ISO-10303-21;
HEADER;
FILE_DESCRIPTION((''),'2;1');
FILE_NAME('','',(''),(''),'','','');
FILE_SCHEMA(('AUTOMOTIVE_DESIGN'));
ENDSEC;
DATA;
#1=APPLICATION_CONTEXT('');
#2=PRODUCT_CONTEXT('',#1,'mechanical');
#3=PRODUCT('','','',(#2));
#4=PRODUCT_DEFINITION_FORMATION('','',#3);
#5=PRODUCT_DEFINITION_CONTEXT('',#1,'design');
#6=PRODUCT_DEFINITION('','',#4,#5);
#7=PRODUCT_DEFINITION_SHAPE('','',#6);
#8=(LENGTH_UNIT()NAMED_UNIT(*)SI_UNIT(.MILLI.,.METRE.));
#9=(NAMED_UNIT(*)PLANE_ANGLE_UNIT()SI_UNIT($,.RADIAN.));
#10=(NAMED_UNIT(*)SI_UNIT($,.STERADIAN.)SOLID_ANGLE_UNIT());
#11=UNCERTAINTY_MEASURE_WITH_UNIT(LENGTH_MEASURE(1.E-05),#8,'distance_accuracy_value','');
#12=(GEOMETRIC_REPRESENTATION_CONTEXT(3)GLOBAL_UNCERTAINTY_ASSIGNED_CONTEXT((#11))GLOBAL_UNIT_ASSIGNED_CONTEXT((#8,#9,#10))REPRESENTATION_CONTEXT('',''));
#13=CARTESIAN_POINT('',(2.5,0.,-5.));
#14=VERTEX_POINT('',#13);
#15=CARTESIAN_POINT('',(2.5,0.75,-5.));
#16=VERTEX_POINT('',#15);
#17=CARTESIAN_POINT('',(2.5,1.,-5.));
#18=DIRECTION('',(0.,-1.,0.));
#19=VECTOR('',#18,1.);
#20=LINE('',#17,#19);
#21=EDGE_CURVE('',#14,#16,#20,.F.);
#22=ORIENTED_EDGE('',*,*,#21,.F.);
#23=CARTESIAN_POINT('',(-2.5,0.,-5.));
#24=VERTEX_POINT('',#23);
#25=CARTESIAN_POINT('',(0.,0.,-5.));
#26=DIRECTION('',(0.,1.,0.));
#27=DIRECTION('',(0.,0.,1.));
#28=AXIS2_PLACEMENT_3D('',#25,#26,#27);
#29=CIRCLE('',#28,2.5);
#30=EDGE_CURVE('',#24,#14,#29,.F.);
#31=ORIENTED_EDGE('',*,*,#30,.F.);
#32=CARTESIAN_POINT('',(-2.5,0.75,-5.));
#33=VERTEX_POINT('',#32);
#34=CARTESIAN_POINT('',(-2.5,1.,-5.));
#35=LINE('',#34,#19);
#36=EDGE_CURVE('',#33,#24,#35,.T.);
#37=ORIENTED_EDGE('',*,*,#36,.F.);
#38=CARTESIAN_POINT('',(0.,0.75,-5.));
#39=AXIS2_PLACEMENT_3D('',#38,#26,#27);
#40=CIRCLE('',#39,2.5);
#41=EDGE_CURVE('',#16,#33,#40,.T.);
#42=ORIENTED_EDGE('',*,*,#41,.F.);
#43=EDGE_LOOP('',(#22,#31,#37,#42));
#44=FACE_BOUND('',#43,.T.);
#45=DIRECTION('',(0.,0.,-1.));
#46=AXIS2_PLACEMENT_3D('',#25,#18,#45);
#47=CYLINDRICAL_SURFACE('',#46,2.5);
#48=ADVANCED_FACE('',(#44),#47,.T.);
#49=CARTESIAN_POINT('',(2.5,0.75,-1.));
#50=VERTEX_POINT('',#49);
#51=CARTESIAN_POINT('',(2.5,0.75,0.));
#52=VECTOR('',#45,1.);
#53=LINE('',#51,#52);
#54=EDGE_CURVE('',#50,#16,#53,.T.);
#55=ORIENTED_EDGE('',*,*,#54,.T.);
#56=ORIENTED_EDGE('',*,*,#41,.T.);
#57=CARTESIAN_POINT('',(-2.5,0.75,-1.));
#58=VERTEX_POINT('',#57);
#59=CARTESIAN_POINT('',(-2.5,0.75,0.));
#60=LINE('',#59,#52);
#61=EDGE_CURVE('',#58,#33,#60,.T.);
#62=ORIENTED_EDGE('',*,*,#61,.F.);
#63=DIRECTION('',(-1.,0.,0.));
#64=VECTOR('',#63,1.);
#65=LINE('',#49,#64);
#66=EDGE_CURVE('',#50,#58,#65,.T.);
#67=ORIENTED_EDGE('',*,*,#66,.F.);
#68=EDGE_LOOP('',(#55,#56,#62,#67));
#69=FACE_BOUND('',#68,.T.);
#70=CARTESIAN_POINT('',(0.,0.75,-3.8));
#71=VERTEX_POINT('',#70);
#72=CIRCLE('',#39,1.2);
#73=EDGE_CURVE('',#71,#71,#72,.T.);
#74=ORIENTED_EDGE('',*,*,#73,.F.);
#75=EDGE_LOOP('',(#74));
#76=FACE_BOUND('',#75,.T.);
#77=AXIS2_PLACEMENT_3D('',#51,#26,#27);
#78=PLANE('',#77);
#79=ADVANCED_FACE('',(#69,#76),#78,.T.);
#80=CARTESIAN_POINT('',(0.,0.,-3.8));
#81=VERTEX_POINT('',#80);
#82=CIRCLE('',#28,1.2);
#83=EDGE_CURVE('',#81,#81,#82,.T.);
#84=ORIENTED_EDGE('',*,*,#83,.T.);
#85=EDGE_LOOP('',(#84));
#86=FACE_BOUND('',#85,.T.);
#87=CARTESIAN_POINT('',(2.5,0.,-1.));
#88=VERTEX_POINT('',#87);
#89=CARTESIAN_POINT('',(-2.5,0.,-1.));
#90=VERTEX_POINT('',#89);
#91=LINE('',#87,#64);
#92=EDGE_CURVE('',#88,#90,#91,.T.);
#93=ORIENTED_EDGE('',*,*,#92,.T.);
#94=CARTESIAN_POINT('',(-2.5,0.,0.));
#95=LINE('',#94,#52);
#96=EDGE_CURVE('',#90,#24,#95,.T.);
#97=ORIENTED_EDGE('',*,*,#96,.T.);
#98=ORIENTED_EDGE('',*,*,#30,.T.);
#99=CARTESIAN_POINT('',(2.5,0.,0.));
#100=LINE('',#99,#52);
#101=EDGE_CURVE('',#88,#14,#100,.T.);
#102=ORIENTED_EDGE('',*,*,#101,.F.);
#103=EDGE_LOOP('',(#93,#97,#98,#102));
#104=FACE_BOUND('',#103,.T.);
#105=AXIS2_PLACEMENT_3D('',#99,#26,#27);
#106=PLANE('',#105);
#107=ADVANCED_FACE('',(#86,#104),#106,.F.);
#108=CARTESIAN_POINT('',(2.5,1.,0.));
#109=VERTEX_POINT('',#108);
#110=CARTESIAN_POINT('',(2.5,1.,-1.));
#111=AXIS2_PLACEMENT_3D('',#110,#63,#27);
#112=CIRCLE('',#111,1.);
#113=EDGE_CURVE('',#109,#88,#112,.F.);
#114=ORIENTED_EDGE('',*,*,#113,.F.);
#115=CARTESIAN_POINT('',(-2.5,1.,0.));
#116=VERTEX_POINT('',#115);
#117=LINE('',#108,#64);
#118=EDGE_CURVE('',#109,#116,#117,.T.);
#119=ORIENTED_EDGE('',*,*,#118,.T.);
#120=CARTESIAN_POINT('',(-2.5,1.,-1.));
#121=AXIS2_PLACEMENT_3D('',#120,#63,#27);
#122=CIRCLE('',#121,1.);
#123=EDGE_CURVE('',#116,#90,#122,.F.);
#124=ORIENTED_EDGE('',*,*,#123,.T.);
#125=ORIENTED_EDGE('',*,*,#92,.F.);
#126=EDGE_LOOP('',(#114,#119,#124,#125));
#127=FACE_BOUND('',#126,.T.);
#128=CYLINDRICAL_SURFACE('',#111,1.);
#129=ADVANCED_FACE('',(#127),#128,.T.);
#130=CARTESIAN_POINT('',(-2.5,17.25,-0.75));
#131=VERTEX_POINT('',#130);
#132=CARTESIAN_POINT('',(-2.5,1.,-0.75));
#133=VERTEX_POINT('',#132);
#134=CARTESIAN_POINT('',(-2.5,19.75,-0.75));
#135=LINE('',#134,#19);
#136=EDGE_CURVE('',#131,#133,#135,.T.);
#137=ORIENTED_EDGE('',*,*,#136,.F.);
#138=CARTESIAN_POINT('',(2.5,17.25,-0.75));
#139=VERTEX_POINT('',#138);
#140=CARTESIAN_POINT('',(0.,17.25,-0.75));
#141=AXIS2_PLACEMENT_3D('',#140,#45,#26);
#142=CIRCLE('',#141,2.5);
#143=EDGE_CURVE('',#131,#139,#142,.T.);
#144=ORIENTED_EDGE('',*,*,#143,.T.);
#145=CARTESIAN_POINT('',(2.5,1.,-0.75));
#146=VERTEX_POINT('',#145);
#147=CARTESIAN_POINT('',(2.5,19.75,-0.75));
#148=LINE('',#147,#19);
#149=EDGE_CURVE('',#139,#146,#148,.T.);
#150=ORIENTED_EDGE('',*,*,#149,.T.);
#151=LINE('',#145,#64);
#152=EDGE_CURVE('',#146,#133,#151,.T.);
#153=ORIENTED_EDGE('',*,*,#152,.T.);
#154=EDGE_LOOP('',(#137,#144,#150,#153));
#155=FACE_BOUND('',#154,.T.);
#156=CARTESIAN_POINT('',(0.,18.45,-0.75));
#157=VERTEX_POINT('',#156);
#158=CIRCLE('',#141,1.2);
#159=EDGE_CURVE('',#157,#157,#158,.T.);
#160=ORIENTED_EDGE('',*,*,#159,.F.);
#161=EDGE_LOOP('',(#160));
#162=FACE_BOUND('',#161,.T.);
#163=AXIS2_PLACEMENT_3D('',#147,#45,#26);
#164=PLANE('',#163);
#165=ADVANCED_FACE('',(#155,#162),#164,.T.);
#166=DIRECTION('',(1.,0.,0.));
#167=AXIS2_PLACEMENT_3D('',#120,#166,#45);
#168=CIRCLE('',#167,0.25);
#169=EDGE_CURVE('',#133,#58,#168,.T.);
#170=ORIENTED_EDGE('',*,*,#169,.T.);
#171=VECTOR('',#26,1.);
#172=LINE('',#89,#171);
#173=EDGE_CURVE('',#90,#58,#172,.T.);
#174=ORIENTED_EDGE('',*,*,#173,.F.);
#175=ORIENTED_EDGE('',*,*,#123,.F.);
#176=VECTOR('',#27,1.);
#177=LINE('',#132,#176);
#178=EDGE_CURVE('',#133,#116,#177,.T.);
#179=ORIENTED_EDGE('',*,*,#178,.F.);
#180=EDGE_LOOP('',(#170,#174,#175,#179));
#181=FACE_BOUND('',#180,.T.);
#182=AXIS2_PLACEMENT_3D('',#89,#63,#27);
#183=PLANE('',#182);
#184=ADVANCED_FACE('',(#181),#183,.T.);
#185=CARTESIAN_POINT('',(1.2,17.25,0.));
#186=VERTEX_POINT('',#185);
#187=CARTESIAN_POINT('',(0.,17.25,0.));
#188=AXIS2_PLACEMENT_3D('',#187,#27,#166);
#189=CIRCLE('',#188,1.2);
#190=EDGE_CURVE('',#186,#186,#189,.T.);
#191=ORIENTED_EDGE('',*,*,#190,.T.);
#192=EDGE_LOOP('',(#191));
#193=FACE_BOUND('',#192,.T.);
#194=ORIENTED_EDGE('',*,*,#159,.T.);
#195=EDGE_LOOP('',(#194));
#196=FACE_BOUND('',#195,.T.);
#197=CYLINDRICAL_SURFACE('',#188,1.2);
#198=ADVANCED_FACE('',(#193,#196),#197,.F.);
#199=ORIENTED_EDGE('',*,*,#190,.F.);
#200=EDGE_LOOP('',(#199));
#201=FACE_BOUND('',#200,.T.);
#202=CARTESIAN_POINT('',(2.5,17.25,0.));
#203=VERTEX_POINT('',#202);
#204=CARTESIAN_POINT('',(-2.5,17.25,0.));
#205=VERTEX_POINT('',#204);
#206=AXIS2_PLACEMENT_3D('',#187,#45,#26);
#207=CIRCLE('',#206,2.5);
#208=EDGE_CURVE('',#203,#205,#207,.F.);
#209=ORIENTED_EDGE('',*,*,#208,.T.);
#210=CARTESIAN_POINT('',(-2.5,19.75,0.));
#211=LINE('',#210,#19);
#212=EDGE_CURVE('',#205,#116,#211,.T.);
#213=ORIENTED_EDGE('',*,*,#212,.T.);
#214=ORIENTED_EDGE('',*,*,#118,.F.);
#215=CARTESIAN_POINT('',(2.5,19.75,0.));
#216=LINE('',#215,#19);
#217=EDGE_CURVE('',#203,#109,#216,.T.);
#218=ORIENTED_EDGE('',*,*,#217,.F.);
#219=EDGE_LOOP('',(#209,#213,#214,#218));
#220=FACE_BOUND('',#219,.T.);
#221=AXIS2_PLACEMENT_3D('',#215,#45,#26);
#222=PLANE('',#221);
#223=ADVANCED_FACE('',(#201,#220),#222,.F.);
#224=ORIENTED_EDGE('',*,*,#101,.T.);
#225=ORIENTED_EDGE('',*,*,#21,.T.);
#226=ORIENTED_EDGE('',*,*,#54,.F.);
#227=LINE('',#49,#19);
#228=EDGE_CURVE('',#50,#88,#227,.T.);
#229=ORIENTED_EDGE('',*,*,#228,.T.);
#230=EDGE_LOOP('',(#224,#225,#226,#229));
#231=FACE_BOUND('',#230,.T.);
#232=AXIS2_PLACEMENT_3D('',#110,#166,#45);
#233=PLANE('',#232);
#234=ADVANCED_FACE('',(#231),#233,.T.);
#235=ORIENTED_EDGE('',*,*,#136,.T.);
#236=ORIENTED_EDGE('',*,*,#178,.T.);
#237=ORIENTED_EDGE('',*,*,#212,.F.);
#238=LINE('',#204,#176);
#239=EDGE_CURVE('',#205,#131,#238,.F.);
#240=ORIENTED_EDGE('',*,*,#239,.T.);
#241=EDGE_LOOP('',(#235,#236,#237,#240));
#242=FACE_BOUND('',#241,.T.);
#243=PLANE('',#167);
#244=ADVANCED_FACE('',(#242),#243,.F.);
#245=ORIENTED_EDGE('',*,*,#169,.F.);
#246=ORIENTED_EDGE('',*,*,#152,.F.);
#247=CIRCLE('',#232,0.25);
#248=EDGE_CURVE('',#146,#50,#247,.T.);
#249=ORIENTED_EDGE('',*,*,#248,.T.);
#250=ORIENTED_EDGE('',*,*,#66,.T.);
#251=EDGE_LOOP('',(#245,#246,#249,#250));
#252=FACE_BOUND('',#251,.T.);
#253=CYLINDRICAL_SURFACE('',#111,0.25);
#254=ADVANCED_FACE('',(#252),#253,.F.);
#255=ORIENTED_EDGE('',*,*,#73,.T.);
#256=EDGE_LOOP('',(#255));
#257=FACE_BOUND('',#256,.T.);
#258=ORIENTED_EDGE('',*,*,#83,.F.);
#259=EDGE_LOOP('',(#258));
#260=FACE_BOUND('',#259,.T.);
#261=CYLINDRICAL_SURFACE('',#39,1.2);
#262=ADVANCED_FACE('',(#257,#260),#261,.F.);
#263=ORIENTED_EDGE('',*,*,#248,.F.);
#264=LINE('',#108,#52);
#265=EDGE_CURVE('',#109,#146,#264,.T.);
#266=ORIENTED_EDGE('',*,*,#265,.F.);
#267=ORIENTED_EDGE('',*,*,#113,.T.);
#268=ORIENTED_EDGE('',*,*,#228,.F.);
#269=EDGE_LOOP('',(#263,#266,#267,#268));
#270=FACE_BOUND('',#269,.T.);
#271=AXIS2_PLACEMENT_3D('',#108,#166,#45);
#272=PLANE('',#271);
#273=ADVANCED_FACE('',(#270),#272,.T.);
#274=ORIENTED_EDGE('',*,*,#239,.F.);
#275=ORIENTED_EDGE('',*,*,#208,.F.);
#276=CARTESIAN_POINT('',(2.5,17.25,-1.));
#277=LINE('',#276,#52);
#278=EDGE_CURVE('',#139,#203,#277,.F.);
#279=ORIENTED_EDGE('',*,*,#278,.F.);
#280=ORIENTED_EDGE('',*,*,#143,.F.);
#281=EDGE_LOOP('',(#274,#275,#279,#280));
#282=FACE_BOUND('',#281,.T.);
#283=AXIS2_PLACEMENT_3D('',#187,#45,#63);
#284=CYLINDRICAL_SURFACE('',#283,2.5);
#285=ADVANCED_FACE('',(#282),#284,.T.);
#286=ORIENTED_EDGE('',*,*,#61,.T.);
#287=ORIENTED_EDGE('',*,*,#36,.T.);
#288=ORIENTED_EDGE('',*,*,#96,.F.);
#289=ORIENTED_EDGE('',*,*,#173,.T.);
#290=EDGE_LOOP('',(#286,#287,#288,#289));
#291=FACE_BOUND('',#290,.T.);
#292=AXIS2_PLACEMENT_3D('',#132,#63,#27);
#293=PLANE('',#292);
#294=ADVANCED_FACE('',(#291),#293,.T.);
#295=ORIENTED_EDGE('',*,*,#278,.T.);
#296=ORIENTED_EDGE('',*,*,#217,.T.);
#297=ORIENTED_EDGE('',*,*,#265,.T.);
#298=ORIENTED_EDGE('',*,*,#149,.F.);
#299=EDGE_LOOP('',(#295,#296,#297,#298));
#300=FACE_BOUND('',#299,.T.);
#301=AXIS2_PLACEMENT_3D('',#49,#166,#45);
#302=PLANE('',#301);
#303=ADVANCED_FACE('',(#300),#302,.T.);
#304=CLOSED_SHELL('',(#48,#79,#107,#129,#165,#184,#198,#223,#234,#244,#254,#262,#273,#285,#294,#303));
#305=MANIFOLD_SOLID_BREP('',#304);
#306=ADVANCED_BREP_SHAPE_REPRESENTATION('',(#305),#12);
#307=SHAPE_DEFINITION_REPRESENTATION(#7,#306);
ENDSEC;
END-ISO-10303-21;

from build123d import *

# Parameters (mm, degrees)
BASE_FLANGE1_DEPTH       = 2.5
FILLET1_RADIUS           = 2.5
FILLET1_LENGTH           = 0.75
FILLET2_RADIUS           = 2.5
FILLET2_LENGTH           = 0.75
M2_CLEARANCE_HOLE1_D     = 2.4
M2_CLEARANCE_HOLE1_DEPTH = 6
M2_CLEARANCE_HOLE1_TIP   = 0.721032743
M2_CLEARANCE_HOLE2_D     = 2.4
M2_CLEARANCE_HOLE2_DEPTH = 6
M2_CLEARANCE_HOLE2_TIP   = 0.721032743


# Sheet-metal steps are written as plain solids
with BuildPart() as part:
    # Sketch1 → Base-Flange1 (new, symmetric)
    with BuildSketch(Plane(origin=(0, 0, 0), x_dir=(0, 0, -1), z_dir=(1, 0, 0))):
        with BuildLine():
            Line((0, 19.75), (0, 1))
            ThreePointArc((0, 1), (0.292893219, 0.292893219), (1, 0))
            Line((1, 0), (7.5, 0))
            Line((7.5, 0), (7.5, 0.75))
            Line((7.5, 0.75), (1, 0.75))
            ThreePointArc((1, 0.75), (0.823223305, 0.823223305), (0.75, 1))
            Line((0.75, 1), (0.75, 19.75))
            Line((0.75, 19.75), (0, 19.75))
        make_face()
    extrude(amount=BASE_FLANGE1_DEPTH, both=True)

    # Fillet1: full round fillet: the end face becomes a half cylinder, R = half its width
    fillet1_face = Plane((0, 0.375, -7.5), x_dir=(0, -1, 0), z_dir=(0, 0, -1))  # on the end face: x along it, z out of the body
    fillet1_slab = fillet1_face.offset(-FILLET1_RADIUS / 2) * Box(FILLET1_LENGTH, 2 * FILLET1_RADIUS, FILLET1_RADIUS, mode=Mode.PRIVATE)  # the body's end, R deep
    fillet1_round = Plane((0, 0.375, -5), x_dir=(0, 0, -1), z_dir=(0, -1, 0)) * Cylinder(FILLET1_RADIUS, FILLET1_LENGTH, mode=Mode.PRIVATE)  # its axis R under the face
    add(fillet1_slab - fillet1_round, mode=Mode.SUBTRACT)

    # Fillet2: full round fillet: the end face becomes a half cylinder, R = half its width
    fillet2_face = Plane((0, 19.75, -0.375), x_dir=(0, 0, -1), z_dir=(0, 1, 0))  # on the end face: x along it, z out of the body
    fillet2_slab = fillet2_face.offset(-FILLET2_RADIUS / 2) * Box(FILLET2_LENGTH, 2 * FILLET2_RADIUS, FILLET2_RADIUS, mode=Mode.PRIVATE)  # the body's end, R deep
    fillet2_round = Plane((0, 17.25, -0.375), x_dir=(0, 1, 0), z_dir=(0, 0, -1)) * Cylinder(FILLET2_RADIUS, FILLET2_LENGTH, mode=Mode.PRIVATE)  # its axis R under the face
    add(fillet2_slab - fillet2_round, mode=Mode.SUBTRACT)

    # M2 Clearance Hole1
    with Locations(Plane.XY):
        with Locations((0, 17.25)):
            Hole(M2_CLEARANCE_HOLE1_D / 2, depth=M2_CLEARANCE_HOLE1_DEPTH)
            with Locations((0, 0, -(M2_CLEARANCE_HOLE1_DEPTH + M2_CLEARANCE_HOLE1_TIP / 2))):  # 118° drill point
                Cone(0, M2_CLEARANCE_HOLE1_D / 2, M2_CLEARANCE_HOLE1_TIP, mode=Mode.SUBTRACT)

    # M2 Clearance Hole2
    with Locations(Plane(origin=(0, 0.75, 0), x_dir=(1, 0, 0), z_dir=(0, 1, 0))):
        with Locations((0, 5)):
            Hole(M2_CLEARANCE_HOLE2_D / 2, depth=M2_CLEARANCE_HOLE2_DEPTH)
            with Locations((0, 0, -(M2_CLEARANCE_HOLE2_DEPTH + M2_CLEARANCE_HOLE2_TIP / 2))):  # 118° drill point
                Cone(0, M2_CLEARANCE_HOLE2_D / 2, M2_CLEARANCE_HOLE2_TIP, mode=Mode.SUBTRACT)


solid = part.part
